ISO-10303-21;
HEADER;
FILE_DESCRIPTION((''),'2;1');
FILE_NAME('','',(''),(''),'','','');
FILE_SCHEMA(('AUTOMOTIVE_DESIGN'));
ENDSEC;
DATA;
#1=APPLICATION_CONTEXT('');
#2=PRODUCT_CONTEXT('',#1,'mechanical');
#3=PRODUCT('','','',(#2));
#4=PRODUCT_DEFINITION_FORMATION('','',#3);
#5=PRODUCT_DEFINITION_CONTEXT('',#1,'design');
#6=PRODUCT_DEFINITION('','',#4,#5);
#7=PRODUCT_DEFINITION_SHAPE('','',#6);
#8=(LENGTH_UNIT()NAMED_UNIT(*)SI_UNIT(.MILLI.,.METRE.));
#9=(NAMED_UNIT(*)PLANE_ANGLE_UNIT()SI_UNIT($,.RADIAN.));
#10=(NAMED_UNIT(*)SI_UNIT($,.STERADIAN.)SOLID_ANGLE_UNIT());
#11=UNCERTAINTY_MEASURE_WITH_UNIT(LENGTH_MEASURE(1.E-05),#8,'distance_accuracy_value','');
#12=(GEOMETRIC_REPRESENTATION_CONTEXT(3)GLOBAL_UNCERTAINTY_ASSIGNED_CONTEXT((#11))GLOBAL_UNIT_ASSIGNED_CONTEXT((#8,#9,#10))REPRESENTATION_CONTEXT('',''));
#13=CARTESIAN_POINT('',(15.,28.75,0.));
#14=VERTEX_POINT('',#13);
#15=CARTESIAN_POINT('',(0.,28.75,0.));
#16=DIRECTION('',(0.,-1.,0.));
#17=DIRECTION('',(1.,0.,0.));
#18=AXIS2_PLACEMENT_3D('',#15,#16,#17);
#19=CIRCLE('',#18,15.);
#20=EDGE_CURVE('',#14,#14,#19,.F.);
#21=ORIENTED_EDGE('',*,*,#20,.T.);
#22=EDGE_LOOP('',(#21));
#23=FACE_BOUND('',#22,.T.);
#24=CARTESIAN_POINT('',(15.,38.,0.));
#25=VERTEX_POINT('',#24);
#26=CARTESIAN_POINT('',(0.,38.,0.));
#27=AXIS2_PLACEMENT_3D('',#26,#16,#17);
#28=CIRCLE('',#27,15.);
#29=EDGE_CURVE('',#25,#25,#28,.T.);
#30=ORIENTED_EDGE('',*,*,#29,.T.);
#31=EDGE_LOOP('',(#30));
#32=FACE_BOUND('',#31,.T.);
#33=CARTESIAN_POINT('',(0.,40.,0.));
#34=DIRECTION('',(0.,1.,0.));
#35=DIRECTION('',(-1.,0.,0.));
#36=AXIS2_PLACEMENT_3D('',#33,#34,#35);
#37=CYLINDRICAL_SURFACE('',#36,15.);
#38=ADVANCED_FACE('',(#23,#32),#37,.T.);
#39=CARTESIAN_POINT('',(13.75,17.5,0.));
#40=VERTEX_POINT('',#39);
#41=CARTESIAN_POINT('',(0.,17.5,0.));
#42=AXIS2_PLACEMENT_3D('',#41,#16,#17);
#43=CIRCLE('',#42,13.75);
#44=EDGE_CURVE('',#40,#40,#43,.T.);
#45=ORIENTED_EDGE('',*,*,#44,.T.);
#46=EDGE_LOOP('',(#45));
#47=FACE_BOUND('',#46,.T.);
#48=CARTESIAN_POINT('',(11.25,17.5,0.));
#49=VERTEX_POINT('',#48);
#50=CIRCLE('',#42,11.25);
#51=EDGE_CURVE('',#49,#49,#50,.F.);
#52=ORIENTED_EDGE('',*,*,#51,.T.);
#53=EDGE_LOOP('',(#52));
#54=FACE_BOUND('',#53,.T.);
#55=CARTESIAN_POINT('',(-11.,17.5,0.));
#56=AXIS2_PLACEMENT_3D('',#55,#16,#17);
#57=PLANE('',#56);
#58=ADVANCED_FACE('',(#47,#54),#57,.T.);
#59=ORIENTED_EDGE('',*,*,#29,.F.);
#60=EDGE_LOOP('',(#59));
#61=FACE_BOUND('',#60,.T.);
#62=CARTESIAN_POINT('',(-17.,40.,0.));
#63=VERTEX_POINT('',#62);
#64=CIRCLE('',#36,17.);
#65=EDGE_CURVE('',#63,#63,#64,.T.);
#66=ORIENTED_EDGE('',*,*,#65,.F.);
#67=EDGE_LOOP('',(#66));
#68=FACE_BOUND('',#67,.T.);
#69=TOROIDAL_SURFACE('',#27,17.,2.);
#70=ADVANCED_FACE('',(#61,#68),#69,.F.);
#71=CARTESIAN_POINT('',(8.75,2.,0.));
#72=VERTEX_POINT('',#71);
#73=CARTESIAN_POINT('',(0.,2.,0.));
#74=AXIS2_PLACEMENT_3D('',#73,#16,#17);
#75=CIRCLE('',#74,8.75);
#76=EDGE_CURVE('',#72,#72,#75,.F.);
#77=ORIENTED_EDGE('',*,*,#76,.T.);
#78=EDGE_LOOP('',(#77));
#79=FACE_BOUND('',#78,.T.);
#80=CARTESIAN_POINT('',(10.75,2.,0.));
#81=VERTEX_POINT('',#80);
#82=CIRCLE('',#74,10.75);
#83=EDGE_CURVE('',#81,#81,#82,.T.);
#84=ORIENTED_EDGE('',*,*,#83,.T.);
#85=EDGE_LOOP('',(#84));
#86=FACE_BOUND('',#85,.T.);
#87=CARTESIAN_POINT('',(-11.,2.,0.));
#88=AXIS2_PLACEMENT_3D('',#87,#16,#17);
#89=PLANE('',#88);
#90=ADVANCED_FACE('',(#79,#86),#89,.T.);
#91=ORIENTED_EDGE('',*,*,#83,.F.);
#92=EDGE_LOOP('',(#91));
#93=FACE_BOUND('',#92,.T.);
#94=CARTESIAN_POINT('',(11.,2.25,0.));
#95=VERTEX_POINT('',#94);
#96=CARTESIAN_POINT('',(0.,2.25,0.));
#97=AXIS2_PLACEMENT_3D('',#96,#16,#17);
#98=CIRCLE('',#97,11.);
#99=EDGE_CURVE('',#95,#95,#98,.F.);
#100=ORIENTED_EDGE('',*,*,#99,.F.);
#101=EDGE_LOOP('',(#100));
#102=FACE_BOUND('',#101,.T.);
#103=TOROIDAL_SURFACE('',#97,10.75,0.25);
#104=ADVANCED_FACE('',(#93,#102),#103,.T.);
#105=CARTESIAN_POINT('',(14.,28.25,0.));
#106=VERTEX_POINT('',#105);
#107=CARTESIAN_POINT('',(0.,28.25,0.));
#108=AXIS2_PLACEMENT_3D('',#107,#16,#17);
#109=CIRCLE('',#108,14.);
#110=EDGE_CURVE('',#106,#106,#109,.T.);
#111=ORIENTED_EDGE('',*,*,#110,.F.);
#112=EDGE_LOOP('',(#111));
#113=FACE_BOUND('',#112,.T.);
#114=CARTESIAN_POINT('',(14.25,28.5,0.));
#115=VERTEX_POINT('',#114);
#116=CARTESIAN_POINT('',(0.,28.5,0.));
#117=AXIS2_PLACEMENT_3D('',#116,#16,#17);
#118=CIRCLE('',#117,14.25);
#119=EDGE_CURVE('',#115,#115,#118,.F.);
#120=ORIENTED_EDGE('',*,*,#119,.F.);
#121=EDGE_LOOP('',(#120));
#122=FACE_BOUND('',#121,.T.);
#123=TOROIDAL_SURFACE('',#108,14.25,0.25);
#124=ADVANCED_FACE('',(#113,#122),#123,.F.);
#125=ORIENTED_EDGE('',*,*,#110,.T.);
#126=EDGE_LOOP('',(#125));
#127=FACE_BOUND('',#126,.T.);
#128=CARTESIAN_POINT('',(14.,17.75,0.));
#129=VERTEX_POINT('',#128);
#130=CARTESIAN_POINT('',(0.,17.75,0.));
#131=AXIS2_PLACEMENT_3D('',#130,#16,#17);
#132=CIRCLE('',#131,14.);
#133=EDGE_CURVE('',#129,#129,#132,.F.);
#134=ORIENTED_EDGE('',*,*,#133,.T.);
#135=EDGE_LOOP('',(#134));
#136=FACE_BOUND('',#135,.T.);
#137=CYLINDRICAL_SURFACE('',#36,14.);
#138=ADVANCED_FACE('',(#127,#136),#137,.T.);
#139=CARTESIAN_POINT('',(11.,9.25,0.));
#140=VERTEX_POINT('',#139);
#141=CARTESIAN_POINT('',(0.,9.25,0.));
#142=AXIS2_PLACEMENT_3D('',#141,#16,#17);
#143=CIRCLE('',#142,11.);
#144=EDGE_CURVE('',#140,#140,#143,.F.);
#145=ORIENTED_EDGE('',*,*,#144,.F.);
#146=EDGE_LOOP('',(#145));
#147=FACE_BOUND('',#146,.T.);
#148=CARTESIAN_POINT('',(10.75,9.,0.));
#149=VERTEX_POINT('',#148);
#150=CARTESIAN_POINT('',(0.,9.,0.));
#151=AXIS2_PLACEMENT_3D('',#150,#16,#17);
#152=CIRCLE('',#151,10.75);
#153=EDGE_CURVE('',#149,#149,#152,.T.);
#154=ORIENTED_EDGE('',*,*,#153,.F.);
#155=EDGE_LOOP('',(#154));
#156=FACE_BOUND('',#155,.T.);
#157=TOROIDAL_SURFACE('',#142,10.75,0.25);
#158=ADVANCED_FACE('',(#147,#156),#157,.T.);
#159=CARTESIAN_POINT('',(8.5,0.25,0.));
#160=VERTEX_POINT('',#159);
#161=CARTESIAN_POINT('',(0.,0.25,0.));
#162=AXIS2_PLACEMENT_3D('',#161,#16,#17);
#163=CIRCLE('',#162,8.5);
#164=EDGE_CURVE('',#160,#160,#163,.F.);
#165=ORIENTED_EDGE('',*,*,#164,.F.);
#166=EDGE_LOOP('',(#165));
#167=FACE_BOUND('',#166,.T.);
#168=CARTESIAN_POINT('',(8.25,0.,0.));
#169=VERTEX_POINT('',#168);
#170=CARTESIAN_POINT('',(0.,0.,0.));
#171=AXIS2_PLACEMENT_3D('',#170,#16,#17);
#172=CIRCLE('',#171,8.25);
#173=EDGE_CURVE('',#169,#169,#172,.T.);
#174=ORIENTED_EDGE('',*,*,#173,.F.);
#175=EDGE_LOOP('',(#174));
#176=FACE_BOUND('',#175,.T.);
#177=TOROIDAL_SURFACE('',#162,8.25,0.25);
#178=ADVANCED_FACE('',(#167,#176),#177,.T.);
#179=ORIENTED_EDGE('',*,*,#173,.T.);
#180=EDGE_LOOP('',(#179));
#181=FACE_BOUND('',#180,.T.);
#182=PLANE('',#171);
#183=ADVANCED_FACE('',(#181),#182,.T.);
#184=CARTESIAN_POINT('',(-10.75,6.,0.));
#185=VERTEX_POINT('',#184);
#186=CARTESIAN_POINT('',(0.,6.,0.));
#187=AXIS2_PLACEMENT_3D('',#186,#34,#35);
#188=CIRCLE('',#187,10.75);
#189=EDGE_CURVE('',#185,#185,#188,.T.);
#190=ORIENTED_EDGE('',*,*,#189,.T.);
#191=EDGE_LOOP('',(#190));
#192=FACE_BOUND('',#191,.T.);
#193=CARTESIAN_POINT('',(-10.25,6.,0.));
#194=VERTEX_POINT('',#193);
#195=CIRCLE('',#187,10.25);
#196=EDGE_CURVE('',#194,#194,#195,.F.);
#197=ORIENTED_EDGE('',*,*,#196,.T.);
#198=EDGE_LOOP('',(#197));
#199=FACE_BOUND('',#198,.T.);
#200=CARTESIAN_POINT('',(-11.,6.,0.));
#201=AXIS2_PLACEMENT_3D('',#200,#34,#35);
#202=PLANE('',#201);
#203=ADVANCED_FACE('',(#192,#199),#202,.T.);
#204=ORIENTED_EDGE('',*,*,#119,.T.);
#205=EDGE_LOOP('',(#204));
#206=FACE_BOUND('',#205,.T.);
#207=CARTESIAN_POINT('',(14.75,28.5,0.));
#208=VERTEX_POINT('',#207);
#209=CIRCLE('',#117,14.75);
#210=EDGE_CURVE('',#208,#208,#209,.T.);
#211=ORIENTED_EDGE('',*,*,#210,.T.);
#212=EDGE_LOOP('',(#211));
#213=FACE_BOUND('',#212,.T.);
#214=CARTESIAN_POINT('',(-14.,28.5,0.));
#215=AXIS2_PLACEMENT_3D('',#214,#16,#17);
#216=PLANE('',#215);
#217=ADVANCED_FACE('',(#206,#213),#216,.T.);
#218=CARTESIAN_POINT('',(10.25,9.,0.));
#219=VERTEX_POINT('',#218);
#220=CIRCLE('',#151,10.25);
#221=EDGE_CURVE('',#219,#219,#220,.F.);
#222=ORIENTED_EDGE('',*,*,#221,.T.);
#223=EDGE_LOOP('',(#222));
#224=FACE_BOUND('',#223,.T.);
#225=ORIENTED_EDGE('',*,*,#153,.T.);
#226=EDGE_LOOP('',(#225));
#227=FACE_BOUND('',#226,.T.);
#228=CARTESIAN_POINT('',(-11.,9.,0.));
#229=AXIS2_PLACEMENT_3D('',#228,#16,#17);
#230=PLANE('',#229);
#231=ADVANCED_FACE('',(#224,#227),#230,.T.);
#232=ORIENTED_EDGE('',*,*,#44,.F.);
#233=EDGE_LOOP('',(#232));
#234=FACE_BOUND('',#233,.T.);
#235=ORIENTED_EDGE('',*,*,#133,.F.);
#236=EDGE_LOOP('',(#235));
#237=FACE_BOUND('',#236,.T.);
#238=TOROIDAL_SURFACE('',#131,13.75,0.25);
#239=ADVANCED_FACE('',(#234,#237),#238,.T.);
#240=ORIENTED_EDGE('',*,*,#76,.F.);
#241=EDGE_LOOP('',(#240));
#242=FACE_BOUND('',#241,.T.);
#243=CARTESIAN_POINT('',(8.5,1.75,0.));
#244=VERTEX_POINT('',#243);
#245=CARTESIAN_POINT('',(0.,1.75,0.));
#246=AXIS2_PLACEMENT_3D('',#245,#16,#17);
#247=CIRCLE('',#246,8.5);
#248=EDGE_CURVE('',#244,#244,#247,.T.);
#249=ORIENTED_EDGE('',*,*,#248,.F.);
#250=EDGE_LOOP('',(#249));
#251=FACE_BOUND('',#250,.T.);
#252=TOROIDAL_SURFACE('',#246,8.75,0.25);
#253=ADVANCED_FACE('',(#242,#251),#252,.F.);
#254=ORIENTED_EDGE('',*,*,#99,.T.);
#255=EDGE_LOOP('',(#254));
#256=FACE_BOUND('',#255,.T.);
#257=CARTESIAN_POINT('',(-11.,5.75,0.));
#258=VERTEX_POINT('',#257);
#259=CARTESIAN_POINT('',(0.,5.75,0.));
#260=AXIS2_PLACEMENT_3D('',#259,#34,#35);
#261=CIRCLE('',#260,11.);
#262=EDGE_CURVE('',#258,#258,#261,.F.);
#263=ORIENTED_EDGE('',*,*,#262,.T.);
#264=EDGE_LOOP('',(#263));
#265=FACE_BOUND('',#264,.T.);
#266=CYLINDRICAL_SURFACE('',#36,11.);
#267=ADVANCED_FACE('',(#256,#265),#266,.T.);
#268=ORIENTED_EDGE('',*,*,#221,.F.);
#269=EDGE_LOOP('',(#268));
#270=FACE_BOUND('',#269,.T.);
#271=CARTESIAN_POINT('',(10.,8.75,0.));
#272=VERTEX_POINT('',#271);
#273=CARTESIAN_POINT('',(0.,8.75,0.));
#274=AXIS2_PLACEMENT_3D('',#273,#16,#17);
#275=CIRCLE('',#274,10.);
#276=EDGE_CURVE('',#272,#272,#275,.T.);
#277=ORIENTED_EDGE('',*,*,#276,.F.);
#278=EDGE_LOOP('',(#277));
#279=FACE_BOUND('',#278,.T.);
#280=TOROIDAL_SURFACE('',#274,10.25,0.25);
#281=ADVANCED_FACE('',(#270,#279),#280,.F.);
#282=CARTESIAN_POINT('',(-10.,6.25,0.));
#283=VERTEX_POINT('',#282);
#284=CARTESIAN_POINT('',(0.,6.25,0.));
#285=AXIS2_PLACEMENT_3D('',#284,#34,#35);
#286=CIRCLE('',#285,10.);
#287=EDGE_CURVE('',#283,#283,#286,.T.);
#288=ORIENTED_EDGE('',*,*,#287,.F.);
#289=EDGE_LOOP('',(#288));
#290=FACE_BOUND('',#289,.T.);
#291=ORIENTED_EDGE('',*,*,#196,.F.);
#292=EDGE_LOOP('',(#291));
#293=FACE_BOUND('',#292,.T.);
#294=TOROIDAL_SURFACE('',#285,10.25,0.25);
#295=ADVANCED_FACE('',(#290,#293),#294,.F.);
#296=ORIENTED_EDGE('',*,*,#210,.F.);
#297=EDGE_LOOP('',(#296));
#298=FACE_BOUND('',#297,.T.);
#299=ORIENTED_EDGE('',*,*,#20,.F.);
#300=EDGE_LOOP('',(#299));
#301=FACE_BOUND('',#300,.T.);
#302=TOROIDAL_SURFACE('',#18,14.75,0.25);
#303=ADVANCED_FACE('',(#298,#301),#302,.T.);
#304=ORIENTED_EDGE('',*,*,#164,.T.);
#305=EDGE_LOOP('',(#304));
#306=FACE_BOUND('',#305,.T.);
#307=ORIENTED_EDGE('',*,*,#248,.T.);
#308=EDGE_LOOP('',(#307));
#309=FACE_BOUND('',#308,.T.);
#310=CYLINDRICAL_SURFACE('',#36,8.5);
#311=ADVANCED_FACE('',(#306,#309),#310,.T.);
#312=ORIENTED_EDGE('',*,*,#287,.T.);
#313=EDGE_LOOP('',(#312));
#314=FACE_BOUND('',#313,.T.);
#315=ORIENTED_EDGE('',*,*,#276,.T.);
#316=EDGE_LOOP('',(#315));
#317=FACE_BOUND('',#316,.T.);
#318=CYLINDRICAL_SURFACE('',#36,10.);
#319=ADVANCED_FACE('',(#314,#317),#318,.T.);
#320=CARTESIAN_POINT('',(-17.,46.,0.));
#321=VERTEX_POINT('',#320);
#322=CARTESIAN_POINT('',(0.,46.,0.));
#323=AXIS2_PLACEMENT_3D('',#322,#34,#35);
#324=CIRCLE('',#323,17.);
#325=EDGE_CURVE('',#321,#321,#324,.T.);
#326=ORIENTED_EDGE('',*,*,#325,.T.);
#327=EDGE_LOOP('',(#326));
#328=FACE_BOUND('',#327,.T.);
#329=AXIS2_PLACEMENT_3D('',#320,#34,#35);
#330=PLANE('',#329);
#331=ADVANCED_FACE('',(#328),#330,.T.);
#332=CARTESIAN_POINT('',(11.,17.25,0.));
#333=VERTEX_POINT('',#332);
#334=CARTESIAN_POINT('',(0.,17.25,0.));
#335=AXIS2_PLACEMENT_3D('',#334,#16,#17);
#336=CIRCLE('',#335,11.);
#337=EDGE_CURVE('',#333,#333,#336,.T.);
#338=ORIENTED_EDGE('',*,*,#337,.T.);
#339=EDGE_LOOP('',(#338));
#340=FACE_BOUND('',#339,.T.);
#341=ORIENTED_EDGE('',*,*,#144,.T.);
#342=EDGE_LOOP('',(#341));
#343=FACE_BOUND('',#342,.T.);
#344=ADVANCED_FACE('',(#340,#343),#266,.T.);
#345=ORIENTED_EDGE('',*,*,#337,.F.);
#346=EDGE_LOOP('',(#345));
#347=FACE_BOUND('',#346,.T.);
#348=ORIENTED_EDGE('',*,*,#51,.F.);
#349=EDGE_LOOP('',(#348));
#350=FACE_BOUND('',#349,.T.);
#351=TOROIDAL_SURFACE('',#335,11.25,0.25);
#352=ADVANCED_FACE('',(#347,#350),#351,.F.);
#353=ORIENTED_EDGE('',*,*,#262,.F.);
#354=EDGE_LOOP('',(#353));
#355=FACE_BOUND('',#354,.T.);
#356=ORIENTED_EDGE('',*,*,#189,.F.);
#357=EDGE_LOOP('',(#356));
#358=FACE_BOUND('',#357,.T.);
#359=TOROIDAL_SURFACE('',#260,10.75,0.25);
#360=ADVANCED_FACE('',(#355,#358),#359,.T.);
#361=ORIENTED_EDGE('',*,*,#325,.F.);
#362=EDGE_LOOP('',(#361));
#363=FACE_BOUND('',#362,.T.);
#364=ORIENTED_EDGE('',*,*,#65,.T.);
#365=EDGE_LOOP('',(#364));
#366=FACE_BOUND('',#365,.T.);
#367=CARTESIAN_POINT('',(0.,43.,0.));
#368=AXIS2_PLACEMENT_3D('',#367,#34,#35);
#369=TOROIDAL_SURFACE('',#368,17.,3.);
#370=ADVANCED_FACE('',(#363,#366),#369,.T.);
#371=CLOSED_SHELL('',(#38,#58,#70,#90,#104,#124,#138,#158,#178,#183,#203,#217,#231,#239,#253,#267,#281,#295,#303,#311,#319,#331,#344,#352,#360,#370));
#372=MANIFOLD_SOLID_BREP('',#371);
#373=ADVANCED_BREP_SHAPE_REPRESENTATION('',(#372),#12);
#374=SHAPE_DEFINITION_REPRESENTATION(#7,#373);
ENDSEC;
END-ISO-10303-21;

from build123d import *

# Parameters (mm, degrees)
CONG_1_R = 2
CONG_2_R = 0.25


with BuildPart() as part:
    # Esquisse1 → Révolution1 (revolve)
    with BuildSketch(Plane.XY):
        with BuildLine():
            Line((-11, 2), (-8.5, 2))
            Line((-8.5, 2), (-8.5, 0))
            Line((-8.5, 0), (0, 0))
            Line((0, 0), (0, 40))
            Line((0, 40), (0, 46))
            Line((0, 46), (-17, 46))
            ThreePointArc((-17, 46), (-20, 43), (-17, 40))
            Line((-17, 40), (-15, 40))
            Line((-15, 40), (-15, 28.5))
            Line((-15, 28.5), (-14, 28.5))
            Line((-14, 28.5), (-14, 17.5))
            Line((-14, 17.5), (-11, 17.5))
            Line((-11, 17.5), (-11, 9))
            Line((-11, 9), (-10, 9))
            Line((-10, 9), (-10, 6))
            Line((-10, 6), (-11, 6))
            Line((-11, 6), (-11, 2))
        make_face()
    revolve(axis=Axis((0, 40, 0), (0, -1, 0)))

    # Congé1
    cong_1_edges = [part.edges().sort_by_distance(p)[0] for p in [
        (15, 40, 0),
    ]]
    fillet(cong_1_edges, radius=CONG_1_R - 0.0001)  # a hair under: the kernel refuses the full size

    # Congé2
    cong_2_edges = [part.edges().sort_by_distance(p)[0] for p in [
        (8.5, 0, 0),
        (8.5, 2, 0),
        (11, 2, 0),
        (11, 6, 0),
        (10, 6, 0),
        (10, 9, 0),
        (11, 9, 0),
        (11, 17.5, 0),
        (14, 17.5, 0),
        (14, 28.5, 0),
        (15, 28.5, 0),
    ]]
    fillet(cong_2_edges, radius=CONG_2_R)


solid = part.part
